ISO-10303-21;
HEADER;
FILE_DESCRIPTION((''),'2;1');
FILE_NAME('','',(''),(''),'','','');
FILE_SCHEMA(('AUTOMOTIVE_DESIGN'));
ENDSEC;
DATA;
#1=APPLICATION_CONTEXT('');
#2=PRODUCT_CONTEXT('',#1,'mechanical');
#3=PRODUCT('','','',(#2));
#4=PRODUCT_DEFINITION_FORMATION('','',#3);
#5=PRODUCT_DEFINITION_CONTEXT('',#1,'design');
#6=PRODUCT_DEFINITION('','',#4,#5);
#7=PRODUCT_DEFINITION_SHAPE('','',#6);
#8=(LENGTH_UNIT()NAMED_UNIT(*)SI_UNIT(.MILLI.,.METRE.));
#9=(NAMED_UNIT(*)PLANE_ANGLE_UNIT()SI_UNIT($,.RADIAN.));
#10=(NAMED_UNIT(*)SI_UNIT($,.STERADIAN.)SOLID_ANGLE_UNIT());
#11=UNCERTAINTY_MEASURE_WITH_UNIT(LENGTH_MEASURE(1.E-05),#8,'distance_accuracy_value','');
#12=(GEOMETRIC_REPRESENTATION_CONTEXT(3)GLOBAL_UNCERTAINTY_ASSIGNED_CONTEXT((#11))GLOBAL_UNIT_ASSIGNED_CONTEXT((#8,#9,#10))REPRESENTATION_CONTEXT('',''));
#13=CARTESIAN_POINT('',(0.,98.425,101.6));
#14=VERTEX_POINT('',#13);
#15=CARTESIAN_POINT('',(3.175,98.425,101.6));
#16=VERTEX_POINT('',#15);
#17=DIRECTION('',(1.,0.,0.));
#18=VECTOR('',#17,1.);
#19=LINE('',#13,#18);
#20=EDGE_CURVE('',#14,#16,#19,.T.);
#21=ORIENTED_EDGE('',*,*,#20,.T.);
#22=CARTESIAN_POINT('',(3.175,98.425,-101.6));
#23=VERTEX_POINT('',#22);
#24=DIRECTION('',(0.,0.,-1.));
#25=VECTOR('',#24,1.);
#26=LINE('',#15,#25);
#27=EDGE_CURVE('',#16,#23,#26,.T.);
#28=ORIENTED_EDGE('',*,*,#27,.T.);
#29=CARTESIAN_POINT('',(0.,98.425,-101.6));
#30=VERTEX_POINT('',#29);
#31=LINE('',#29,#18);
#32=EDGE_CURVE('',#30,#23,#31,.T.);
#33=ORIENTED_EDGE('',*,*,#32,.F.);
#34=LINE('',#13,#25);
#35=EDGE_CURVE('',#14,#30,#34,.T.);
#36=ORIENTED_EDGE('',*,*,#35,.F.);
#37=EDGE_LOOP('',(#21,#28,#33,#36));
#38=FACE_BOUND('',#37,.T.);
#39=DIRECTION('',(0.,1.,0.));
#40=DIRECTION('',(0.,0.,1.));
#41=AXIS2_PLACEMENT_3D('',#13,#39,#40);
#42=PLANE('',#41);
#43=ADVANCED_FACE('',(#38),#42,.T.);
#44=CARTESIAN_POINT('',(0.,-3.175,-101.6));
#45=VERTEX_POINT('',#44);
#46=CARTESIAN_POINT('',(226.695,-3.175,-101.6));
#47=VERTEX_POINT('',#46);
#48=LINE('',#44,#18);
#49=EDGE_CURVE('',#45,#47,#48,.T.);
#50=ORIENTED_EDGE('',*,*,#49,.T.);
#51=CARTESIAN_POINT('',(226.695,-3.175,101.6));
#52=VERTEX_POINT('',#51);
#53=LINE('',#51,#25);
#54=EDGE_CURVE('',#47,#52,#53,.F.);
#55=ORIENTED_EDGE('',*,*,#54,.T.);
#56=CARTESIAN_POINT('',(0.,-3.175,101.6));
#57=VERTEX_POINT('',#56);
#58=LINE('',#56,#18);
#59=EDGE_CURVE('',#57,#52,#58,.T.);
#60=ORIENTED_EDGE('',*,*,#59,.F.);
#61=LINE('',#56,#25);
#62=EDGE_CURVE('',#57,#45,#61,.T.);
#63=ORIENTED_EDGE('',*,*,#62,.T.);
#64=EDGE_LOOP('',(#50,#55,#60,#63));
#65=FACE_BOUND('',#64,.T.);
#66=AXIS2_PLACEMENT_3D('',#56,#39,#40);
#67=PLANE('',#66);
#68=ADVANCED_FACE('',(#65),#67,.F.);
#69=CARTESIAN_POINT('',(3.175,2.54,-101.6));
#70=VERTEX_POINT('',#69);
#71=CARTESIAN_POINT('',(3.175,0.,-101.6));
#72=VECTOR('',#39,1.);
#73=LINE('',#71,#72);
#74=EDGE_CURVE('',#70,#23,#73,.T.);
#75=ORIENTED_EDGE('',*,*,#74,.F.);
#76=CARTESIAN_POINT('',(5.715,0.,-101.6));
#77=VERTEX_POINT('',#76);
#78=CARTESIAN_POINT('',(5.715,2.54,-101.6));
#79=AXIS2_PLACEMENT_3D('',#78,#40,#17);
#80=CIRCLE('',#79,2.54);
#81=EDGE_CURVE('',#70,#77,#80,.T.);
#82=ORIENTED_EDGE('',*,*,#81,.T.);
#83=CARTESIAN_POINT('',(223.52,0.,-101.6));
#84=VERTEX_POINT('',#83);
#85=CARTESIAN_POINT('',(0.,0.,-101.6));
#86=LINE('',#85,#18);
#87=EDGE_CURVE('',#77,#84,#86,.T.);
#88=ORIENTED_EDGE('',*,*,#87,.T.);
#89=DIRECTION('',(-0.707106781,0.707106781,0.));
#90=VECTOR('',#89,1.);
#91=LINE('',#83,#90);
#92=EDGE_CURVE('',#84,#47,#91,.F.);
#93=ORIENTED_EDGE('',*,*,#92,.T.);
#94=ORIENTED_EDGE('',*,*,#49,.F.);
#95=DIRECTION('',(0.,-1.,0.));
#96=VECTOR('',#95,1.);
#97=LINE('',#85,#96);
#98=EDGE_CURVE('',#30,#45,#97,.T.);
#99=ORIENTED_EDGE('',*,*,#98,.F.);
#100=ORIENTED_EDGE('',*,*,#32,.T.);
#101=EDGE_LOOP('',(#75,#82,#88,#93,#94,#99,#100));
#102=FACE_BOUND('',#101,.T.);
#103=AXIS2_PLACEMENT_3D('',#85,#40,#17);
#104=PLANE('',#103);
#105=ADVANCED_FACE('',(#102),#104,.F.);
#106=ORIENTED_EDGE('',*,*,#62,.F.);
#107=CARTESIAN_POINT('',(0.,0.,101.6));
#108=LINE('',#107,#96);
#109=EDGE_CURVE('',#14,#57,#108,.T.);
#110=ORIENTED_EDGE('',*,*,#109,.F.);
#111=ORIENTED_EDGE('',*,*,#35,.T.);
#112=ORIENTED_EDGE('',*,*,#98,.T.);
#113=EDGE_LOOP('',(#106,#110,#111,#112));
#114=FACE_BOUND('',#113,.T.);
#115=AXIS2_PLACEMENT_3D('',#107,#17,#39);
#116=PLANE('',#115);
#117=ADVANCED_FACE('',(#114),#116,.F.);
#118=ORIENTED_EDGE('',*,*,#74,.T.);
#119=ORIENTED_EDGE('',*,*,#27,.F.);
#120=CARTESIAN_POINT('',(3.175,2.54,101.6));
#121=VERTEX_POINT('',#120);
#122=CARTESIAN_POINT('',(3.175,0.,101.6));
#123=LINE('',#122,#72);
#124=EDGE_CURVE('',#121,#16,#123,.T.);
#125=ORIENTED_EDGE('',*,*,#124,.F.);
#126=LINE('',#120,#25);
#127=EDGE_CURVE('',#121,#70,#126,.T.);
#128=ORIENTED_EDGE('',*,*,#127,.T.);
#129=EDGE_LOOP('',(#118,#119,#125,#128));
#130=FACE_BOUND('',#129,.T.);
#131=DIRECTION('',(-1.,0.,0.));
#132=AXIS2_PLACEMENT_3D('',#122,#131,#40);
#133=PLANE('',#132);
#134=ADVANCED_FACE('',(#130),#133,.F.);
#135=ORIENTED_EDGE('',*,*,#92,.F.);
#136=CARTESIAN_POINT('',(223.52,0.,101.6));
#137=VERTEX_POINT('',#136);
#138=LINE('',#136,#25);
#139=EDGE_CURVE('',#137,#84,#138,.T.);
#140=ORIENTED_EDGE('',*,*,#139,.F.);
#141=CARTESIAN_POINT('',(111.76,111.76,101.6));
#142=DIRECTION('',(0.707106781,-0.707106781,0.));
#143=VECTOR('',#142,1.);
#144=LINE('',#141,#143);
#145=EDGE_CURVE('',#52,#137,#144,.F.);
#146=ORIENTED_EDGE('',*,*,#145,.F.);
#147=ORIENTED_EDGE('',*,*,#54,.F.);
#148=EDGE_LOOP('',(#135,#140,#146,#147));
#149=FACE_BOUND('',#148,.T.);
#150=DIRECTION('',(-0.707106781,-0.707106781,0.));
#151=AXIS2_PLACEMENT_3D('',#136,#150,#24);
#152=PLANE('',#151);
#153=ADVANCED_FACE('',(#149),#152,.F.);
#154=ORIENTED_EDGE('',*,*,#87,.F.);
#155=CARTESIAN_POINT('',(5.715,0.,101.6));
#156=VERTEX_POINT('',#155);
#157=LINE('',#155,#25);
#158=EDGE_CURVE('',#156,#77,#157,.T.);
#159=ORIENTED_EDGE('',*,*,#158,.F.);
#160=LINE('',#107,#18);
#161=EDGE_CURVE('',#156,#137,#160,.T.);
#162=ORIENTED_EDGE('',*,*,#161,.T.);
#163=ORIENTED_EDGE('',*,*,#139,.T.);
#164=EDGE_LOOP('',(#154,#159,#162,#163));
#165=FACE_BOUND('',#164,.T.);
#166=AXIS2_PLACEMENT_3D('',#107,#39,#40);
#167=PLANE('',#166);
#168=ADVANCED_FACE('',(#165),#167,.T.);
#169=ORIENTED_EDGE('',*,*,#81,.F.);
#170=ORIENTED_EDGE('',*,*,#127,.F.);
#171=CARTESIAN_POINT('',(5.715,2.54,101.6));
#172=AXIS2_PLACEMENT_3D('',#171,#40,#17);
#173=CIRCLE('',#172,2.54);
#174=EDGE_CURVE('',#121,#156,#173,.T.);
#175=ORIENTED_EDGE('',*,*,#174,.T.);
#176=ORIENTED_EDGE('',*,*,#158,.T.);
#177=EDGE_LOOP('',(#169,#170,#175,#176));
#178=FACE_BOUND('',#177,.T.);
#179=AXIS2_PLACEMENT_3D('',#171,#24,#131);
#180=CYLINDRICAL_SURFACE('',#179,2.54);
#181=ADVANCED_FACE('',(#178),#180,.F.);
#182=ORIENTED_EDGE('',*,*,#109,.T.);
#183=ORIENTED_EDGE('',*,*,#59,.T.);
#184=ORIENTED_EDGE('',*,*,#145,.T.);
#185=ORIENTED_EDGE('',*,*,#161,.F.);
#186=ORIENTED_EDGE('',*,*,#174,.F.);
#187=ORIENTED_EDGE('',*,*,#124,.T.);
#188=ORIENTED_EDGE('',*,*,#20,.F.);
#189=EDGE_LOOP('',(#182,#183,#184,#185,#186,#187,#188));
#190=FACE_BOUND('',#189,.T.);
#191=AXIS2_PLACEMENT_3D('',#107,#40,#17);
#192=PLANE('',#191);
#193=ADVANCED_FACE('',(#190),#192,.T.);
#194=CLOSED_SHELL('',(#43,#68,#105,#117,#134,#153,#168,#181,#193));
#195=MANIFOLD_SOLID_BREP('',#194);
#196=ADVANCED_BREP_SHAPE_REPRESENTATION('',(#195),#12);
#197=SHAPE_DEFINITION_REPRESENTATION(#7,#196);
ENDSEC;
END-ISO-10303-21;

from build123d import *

# Parameters (mm, degrees)
SKETCH1_W           = 3.175
SKETCH1_H           = 98.425
BOSS_EXTRUDE1_DEPTH = 101.6
CHAMFER1_SIZE       = 5.08


with BuildPart() as part:
    # Sketch1 → Boss-Extrude1 (new, symmetric)
    with BuildSketch(Plane.XY):
        Polygon((3.175, 0), (0, 0), (0, -3.175), (228.6, -3.175), (228.6, 0), (5.715, 0), align=None)
        with Locations((1.5875, 49.2125)):
            Rectangle(SKETCH1_W, SKETCH1_H)
        with BuildLine():
            Line((3.175, 2.54), (3.175, 0))
            Line((3.175, 0), (5.715, 0))
            ThreePointArc((5.715, 0), (3.918948776, 0.743948776), (3.175, 2.54))
        make_face()
    extrude(amount=BOSS_EXTRUDE1_DEPTH, both=True)

    # Chamfer1
    # the kernel refuses this chamfer: 5.08 mm, written as the material it takes off along each edge
    with BuildSketch(Plane(origin=(228.6, 0, 114.664149579), x_dir=(-0.9996219169112968, 0.027495876610586324, 0), z_dir=(0, 0, -1))) as chamfer1_piece_1:
        Polygon((CHAMFER1_SIZE * 0.999621916911, -CHAMFER1_SIZE * 0.0274958766106), (-CHAMFER1_SIZE * 0.0274958766106, -CHAMFER1_SIZE * 0.999621916911), (0, 0), align=None)
    extrude(amount=229.328299158, mode=Mode.SUBTRACT)


solid = part.part
